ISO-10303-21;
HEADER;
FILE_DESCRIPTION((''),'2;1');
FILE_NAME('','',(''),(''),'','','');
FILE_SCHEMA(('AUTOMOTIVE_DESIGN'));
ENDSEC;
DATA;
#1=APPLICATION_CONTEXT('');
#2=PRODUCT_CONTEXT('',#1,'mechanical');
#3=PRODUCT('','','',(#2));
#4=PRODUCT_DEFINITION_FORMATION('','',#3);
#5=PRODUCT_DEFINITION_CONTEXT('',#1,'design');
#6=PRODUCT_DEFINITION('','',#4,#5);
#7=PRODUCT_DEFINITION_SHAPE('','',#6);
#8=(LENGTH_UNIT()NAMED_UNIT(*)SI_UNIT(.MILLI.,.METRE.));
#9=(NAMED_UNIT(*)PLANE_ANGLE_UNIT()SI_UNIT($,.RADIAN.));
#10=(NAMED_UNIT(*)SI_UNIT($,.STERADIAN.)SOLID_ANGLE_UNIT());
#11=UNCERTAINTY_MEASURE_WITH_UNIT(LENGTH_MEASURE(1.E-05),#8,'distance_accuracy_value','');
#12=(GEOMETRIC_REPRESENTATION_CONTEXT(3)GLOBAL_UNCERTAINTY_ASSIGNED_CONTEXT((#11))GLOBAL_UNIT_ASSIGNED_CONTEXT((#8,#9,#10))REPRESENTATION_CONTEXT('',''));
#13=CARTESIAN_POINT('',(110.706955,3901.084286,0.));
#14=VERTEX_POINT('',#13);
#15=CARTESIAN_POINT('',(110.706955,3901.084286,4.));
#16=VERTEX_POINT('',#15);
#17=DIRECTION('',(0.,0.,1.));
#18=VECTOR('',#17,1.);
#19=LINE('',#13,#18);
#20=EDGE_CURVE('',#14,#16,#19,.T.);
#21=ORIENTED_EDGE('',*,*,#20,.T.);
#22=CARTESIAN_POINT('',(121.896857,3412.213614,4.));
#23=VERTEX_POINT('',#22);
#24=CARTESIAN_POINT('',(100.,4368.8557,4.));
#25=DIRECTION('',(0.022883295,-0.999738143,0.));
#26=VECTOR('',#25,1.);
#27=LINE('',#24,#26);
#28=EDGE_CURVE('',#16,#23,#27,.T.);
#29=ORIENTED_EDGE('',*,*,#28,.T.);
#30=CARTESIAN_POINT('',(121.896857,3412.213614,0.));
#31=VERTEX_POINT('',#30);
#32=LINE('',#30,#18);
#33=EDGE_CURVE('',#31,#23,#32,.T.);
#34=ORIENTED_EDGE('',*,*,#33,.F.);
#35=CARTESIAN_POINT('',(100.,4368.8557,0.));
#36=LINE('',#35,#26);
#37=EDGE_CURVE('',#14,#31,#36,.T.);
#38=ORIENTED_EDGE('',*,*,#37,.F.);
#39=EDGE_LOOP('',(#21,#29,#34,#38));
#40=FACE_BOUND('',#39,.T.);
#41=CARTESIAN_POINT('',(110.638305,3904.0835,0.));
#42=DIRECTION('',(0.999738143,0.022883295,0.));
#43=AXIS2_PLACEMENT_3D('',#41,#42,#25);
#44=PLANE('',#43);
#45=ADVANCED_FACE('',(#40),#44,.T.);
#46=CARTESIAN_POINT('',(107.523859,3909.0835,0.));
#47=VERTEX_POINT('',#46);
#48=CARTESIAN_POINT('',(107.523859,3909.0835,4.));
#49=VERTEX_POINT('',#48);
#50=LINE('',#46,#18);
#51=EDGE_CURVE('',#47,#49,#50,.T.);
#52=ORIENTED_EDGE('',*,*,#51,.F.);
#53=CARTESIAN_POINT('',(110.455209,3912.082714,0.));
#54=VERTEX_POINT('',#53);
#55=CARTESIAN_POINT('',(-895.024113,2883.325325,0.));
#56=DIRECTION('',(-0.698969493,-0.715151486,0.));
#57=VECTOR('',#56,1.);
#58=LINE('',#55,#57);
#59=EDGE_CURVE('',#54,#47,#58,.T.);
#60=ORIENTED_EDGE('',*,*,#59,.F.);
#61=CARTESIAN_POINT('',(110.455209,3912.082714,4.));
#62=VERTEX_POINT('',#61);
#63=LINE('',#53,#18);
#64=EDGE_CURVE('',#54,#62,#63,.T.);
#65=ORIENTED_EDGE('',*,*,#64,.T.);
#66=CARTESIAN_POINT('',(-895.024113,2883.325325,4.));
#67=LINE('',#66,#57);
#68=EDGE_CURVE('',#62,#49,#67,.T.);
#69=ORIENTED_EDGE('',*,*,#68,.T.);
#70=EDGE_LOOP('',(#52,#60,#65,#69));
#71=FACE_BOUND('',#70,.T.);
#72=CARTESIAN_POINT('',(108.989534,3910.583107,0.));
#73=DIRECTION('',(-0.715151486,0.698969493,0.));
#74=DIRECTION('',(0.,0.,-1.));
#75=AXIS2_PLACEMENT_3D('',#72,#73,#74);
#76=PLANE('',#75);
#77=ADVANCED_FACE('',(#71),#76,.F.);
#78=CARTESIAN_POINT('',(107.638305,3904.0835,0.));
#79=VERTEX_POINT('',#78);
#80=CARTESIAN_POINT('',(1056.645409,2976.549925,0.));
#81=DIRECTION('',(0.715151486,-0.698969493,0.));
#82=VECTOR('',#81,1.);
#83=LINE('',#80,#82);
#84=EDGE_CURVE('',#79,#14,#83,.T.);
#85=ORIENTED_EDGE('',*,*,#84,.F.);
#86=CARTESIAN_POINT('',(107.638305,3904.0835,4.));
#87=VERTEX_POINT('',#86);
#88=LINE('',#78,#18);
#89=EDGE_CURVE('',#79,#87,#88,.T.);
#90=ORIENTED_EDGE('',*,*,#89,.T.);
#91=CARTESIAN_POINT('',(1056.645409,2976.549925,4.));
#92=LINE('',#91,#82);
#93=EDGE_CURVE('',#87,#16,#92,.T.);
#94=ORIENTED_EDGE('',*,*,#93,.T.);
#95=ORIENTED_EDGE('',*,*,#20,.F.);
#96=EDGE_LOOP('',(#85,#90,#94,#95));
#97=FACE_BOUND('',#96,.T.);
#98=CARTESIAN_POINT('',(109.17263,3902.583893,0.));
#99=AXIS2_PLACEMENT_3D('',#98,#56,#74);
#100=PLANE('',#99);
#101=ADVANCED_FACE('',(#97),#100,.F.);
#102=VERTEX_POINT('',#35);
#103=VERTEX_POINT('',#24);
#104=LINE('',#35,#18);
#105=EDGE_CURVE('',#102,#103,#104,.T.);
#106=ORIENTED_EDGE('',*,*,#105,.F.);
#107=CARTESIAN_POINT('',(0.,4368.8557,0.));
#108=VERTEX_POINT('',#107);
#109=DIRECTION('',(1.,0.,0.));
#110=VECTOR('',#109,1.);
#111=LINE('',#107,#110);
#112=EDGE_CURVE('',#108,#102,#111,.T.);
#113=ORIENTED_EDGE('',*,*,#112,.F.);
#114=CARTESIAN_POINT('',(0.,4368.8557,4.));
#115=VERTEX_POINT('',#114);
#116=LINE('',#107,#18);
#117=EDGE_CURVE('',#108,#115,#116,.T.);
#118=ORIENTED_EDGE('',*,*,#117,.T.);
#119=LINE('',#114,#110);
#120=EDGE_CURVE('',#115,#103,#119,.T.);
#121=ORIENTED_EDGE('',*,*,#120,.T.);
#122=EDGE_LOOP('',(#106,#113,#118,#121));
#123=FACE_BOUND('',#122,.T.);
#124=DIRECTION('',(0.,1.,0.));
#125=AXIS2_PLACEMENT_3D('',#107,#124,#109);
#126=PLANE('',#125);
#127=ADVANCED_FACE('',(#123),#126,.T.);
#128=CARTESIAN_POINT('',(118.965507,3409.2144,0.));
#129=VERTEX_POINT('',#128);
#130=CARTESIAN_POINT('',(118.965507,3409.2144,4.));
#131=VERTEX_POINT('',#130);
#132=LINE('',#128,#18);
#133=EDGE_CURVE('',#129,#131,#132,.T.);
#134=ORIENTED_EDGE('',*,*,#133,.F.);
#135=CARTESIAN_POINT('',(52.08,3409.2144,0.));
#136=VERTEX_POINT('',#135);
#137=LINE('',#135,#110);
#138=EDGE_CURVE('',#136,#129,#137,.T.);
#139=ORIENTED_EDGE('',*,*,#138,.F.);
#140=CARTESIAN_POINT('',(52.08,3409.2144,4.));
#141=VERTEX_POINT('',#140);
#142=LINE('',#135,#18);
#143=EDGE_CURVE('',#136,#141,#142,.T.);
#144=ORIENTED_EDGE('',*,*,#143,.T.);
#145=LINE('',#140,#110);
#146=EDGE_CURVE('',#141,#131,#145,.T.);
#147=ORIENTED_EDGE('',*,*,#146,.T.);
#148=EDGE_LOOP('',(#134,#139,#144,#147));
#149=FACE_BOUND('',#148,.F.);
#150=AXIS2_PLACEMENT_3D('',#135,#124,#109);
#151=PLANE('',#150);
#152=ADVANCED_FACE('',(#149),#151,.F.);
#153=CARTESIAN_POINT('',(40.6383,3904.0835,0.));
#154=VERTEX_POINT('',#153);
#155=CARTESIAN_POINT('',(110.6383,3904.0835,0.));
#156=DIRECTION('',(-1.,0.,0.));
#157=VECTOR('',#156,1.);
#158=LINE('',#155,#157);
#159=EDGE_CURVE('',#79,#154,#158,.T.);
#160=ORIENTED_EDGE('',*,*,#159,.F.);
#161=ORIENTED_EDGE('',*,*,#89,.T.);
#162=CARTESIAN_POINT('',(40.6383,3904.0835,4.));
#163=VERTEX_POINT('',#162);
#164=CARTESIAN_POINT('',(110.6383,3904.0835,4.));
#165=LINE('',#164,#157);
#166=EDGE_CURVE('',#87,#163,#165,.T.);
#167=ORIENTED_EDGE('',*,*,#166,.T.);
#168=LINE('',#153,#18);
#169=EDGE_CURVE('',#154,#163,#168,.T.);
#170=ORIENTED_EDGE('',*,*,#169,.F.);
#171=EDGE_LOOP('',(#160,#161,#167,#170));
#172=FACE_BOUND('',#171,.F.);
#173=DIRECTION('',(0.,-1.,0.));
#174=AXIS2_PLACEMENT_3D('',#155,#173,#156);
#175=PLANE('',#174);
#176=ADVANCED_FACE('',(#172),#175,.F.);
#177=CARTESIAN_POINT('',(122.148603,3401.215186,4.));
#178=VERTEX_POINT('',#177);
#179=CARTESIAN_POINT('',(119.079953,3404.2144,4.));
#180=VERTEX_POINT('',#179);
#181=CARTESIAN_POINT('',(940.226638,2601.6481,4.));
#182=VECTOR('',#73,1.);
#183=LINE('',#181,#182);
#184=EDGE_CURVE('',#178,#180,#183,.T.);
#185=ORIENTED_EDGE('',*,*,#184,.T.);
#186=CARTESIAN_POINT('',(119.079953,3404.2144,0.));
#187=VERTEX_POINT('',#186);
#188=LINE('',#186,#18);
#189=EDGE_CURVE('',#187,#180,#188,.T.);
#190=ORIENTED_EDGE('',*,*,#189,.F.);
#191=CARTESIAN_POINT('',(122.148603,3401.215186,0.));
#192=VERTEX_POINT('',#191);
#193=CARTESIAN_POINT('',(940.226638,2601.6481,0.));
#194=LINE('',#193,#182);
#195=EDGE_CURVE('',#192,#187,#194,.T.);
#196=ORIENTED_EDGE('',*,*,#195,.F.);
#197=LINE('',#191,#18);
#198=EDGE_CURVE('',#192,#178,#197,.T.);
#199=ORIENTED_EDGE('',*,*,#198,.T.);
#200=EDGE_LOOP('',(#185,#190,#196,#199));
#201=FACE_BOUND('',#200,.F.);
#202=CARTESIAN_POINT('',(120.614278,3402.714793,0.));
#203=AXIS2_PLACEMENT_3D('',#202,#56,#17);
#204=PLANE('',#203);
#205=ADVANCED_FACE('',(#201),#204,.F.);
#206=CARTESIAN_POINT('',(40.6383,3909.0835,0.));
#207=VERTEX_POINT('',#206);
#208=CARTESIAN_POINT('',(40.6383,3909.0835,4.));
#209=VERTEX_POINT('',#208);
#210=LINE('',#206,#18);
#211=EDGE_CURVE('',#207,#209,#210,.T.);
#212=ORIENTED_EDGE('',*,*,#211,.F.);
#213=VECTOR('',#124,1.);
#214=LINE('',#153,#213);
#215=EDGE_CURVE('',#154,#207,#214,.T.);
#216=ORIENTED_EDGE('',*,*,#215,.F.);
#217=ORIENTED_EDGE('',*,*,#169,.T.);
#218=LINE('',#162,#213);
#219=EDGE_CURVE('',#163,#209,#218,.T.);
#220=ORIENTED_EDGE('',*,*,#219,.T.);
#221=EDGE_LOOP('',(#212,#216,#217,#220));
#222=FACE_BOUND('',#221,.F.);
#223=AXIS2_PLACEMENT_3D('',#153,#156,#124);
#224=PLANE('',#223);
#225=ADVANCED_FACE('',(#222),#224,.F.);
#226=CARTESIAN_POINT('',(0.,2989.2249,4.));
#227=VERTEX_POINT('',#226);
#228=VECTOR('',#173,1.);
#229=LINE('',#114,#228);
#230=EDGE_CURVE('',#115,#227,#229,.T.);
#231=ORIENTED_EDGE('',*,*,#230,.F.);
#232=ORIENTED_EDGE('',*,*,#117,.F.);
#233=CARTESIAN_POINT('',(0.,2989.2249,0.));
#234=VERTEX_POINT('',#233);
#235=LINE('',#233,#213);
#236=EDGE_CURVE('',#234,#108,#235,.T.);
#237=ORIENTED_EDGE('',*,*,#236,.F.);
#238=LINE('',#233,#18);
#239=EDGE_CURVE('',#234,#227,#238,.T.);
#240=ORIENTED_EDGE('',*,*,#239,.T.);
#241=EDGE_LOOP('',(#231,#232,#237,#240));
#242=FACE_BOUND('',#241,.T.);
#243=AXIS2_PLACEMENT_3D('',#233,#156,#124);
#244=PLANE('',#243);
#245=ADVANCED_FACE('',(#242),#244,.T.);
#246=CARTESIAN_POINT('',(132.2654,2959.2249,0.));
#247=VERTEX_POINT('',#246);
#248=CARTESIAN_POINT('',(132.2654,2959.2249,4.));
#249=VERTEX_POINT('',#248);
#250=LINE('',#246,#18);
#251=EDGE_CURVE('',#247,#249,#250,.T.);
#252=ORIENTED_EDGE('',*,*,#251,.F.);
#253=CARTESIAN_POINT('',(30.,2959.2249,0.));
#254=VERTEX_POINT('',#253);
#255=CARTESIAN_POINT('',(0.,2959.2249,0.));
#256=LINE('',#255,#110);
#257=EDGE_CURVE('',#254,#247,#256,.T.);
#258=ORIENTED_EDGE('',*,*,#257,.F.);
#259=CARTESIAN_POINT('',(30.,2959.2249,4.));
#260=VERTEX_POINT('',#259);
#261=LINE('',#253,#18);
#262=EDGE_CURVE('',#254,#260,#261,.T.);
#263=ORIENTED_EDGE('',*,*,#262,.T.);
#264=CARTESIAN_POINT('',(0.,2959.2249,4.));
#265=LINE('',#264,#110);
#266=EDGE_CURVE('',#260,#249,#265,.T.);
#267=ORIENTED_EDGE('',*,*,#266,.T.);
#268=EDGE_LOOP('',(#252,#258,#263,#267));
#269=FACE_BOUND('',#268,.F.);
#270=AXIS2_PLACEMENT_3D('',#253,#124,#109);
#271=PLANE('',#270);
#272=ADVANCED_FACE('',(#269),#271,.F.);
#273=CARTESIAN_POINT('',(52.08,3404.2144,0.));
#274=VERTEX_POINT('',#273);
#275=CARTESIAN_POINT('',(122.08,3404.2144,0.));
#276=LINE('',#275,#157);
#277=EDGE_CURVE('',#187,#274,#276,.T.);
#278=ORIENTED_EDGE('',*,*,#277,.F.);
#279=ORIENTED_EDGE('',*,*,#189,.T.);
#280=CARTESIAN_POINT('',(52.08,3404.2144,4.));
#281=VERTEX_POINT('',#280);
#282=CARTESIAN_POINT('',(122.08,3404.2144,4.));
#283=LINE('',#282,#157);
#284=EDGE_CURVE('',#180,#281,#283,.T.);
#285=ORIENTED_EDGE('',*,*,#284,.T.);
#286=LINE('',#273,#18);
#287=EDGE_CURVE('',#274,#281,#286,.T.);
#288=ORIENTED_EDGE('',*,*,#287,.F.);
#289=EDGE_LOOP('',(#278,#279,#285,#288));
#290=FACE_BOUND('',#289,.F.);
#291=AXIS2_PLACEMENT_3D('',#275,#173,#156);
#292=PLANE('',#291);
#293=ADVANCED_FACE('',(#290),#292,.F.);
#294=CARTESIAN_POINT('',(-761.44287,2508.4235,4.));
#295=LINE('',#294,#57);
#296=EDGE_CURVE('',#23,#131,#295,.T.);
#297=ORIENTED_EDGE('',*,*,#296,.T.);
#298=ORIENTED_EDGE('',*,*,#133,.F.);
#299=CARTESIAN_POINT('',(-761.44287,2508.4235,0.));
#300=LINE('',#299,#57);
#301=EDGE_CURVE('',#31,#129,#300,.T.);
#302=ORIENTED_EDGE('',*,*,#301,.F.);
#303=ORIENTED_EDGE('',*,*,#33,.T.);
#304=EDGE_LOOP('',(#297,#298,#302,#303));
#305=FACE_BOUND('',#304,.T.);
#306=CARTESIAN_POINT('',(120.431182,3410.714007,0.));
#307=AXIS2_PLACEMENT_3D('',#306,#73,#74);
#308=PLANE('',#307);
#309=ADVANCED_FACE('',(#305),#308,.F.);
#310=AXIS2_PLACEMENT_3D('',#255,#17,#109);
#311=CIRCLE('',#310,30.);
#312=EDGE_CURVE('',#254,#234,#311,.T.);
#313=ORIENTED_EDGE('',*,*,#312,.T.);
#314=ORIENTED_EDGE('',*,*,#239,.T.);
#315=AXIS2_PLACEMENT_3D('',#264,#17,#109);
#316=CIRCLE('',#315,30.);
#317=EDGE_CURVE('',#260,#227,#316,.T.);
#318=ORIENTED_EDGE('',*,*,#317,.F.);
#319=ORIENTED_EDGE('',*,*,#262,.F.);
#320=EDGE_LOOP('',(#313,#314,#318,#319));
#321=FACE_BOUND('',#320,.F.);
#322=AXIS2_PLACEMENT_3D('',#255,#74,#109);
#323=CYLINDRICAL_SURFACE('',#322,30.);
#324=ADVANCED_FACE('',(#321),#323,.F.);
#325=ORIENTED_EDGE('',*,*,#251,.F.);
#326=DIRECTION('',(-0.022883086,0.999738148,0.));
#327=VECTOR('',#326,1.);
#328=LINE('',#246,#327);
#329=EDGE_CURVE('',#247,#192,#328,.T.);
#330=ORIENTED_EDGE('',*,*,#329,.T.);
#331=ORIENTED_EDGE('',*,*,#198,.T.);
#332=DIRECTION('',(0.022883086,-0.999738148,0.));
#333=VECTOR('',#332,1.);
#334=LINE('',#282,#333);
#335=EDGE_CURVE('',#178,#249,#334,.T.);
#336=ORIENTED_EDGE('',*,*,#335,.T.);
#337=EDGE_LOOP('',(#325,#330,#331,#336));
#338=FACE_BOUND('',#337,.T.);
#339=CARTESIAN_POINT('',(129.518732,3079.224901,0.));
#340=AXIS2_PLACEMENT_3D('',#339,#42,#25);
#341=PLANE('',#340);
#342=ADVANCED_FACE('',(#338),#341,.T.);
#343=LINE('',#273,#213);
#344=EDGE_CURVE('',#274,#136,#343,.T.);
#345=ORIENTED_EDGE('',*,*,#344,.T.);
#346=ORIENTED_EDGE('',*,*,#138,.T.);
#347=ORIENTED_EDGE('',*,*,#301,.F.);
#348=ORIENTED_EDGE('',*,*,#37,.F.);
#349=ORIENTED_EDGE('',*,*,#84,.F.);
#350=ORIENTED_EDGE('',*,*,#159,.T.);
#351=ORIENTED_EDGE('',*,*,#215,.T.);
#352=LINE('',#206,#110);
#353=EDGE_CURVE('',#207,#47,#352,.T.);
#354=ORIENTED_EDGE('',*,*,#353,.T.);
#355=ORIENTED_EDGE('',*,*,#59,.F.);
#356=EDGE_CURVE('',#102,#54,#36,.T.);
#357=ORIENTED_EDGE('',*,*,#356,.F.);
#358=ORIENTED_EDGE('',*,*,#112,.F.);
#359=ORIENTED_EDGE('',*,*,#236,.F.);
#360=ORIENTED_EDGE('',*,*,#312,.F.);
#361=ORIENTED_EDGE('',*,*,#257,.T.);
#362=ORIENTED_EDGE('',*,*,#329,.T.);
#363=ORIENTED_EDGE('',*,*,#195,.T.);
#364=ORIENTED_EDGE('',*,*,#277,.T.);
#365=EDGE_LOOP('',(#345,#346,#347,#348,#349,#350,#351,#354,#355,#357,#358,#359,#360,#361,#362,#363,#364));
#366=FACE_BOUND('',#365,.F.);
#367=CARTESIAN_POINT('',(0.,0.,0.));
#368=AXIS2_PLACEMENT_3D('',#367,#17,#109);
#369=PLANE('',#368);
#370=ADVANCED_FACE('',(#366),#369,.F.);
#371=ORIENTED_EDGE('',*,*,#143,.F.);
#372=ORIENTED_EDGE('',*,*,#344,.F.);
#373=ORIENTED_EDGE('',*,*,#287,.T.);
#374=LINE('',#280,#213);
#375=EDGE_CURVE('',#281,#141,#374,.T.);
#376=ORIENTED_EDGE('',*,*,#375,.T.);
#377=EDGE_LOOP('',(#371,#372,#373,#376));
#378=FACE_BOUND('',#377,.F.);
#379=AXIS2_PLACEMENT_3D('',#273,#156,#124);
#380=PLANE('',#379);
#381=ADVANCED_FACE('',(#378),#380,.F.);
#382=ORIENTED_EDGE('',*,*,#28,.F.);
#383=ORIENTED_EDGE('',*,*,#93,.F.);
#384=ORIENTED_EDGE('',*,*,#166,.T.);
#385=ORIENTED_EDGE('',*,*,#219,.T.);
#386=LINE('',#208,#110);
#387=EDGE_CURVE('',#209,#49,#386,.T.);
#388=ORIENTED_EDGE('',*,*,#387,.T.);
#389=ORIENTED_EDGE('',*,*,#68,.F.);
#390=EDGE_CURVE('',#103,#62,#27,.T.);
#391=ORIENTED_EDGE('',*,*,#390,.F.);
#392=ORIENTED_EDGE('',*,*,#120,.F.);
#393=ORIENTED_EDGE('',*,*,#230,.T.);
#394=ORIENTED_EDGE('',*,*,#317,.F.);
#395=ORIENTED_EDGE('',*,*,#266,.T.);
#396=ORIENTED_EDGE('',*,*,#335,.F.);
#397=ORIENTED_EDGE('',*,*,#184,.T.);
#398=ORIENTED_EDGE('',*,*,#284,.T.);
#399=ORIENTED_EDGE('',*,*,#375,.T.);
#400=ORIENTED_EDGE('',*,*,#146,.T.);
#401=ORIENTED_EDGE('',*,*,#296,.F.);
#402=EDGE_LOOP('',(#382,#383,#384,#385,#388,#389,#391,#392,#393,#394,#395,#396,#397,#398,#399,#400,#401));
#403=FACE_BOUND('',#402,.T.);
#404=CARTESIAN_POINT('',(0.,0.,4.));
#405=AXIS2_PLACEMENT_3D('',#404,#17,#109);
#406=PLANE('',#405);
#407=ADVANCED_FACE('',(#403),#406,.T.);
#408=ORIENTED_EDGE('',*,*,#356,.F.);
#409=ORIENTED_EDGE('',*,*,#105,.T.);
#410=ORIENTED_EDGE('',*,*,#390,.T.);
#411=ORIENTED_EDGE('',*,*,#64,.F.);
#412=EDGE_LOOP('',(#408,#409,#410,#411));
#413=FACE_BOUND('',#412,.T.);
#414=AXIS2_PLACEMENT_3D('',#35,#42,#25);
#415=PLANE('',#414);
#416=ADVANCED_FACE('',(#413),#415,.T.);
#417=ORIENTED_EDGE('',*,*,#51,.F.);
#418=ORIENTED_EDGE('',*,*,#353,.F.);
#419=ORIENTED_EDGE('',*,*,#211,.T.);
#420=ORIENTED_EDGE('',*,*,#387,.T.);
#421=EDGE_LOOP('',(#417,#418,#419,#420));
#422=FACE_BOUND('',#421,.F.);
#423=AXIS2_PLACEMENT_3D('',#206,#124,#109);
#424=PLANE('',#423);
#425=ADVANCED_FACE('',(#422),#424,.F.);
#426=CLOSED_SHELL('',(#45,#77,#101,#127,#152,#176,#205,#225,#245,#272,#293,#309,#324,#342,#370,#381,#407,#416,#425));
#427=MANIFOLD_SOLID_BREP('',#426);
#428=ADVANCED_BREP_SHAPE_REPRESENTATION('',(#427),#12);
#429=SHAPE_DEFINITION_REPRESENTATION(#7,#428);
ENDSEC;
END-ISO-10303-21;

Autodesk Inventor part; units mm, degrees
ref_plane "YZ Plane" through (0, 0, 0) normal (1, 0, 0) x (0, 1, 0)
ref_plane "XZ Plane" through (0, 0, 0) normal (0, 1, 0) x (-1, 0, 0)
ref_plane "XY Plane" through (0, 0, 0) normal (0, 0, 1) x (1, 0, 0)
sketch "Sketch1" plane through (0, 0, 0) normal (0, 0, 1) x (1, 0, 0)
  line L0 (0, 0) -> (0, 4368.8557)
  line L1 (0, 4368.8557) -> (100, 4368.8557)
  line L2 (100, 4368.8557) -> (200, 0)
  line L3 (200, 0) -> (0, 0)
  circle A0 centre (0, 0) radius 30
  line L4 (0, 1479.6125) -> (166.1327, 1479.6125)
  line L5 (0, 2959.2249) -> (132.2654, 2959.2249)
  circle A1 centre (0, 1479.6125) radius 30
  circle A2 centre (0, 2959.2249) radius 30
  line L6 (190.7298, 405) -> (120.7298, 405)
  line L7 (120.7298, 405) -> (120.7298, 410)
  line L8 (120.7298, 410) -> (190.7298, 410)
  line L9 (190.7298, 410) -> (190.7298, 405)
  line L10 (109.2882, 909.8691) -> (179.2882, 909.8691)
  line L11 (179.2882, 904.8691) -> (109.2882, 904.8691)
  line L12 (109.2882, 904.8691) -> (109.2882, 909.8691)
  line L13 (179.2882, 909.8691) -> (179.2882, 904.8691)
  line L14 (97.8465, 1409.7381) -> (167.8465, 1409.7381)
  line L15 (167.8465, 1404.7381) -> (97.8465, 1404.7381)
  line L16 (97.8465, 1404.7381) -> (97.8465, 1409.7381)
  line L17 (167.8465, 1409.7381) -> (167.8465, 1404.7381)
  line L18 (86.4049, 1909.6072) -> (156.4049, 1909.6072)
  line L19 (156.4049, 1904.6072) -> (86.4049, 1904.6072)
  line L20 (86.4049, 1904.6072) -> (86.4049, 1909.6072)
  line L21 (156.4049, 1909.6072) -> (156.4049, 1904.6072)
  line L22 (74.9632, 2409.4763) -> (144.9632, 2409.4763)
  line L23 (144.9632, 2404.4763) -> (74.9632, 2404.4763)
  line L24 (74.9632, 2404.4763) -> (74.9632, 2409.4763)
  line L25 (144.9632, 2409.4763) -> (144.9632, 2404.4763)
  line L26 (63.5216, 2909.3454) -> (133.5216, 2909.3454)
  line L27 (133.5216, 2904.3454) -> (63.5216, 2904.3454)
  line L28 (63.5216, 2904.3454) -> (63.5216, 2909.3454)
  line L29 (133.5216, 2909.3454) -> (133.5216, 2904.3454)
  line L30 (52.08, 3409.2144) -> (122.08, 3409.2144)
  line L31 (122.08, 3404.2144) -> (52.08, 3404.2144)
  line L32 (52.08, 3404.2144) -> (52.08, 3409.2144)
  line L33 (122.08, 3409.2144) -> (122.08, 3404.2144)
  line L34 (40.6383, 3909.0835) -> (110.6383, 3909.0835)
  line L35 (110.6383, 3904.0835) -> (40.6383, 3904.0835)
  line L36 (40.6383, 3904.0835) -> (40.6383, 3909.0835)
  line L37 (110.6383, 3909.0835) -> (110.6383, 3904.0835)
  line L38 (0, 1629.6125) -> (162.6993, 1629.6125)
  line L39 (0, 3079.2249) -> (129.5187, 3079.2249)
  point P0 (30, 2959.2249)
  point P1 (0, 2929.2249)
  point P2 (0, 1509.6125)
  point P3 (0, 1449.6125)
  point P4 (0, 30)
  point P5 (30, 0)
  point P6 (190.6154, 410)
  point P7 (179.2882, 904.8691)
  point P8 (179.1737, 909.8691)
  point P9 (167.8465, 1404.7381)
  point P10 (167.7321, 1409.7381)
  point P11 (30, 1479.6125)
  point P12 (156.4049, 1904.6072)
  point P13 (156.2904, 1909.6072)
  point P14 (144.9632, 2404.4763)
  point P15 (144.8488, 2409.4763)
  point P16 (133.5216, 2904.3454)
  point P17 (133.4072, 2909.3454)
  point P18 (0, 2989.2249)
  point P19 (122.08, 3404.2144)
  point P20 (121.9655, 3409.2144)
  point P21 (110.6383, 3904.0835)
  point P22 (110.5239, 3909.0835)
  dimension "d65" = 100
  dimension "d67" = 200
  dimension "d68" = 60
  dimension "d69" = 1480
  dimension "d70" = 1480
  dimension "d71" = 1410
  dimension "d72" = 5
  dimension "d73" = 70
  dimension "d74" = 410
  dimension "d77" = 500
  dimension "d82" = 120
  dimension "d83" = 150
extrude "Plate3" add sketch "Sketch1" along normal blind 4 contours L39 L2 L5 A2 L0 | L0 L1 L2 L34 L36 L35 L30 L32 L31 L39
chamfer "Corner Chamfer2" distance 3 angle 45 4 edges at (122.08, 3404.2144, 2) (121.9655, 3409.2144, 2) (110.6383, 3904.0835, 2) (110.5239, 3909.0835, 2)
equation "\"BendRadius\" = Thickness"
equation "\"BendReliefWidth\" = Thickness"
equation "\"BendReliefDepth\" = 0.5 * Thickness"
equation "\"CornerReliefSize\" = 4 * Thickness"
equation "\"MinimumRemnant\" = 2 * Thickness"
equation "\"TransitionRadius\" = BendRadius"
equation "\"JacobiRadiusSize\" = BendRadius"
equation "\"GapSize\" = Thickness"
equation "\"Thickness\" = 4"
properties part number "GBK 3311 central third rib_CPY1" material "Steel"
